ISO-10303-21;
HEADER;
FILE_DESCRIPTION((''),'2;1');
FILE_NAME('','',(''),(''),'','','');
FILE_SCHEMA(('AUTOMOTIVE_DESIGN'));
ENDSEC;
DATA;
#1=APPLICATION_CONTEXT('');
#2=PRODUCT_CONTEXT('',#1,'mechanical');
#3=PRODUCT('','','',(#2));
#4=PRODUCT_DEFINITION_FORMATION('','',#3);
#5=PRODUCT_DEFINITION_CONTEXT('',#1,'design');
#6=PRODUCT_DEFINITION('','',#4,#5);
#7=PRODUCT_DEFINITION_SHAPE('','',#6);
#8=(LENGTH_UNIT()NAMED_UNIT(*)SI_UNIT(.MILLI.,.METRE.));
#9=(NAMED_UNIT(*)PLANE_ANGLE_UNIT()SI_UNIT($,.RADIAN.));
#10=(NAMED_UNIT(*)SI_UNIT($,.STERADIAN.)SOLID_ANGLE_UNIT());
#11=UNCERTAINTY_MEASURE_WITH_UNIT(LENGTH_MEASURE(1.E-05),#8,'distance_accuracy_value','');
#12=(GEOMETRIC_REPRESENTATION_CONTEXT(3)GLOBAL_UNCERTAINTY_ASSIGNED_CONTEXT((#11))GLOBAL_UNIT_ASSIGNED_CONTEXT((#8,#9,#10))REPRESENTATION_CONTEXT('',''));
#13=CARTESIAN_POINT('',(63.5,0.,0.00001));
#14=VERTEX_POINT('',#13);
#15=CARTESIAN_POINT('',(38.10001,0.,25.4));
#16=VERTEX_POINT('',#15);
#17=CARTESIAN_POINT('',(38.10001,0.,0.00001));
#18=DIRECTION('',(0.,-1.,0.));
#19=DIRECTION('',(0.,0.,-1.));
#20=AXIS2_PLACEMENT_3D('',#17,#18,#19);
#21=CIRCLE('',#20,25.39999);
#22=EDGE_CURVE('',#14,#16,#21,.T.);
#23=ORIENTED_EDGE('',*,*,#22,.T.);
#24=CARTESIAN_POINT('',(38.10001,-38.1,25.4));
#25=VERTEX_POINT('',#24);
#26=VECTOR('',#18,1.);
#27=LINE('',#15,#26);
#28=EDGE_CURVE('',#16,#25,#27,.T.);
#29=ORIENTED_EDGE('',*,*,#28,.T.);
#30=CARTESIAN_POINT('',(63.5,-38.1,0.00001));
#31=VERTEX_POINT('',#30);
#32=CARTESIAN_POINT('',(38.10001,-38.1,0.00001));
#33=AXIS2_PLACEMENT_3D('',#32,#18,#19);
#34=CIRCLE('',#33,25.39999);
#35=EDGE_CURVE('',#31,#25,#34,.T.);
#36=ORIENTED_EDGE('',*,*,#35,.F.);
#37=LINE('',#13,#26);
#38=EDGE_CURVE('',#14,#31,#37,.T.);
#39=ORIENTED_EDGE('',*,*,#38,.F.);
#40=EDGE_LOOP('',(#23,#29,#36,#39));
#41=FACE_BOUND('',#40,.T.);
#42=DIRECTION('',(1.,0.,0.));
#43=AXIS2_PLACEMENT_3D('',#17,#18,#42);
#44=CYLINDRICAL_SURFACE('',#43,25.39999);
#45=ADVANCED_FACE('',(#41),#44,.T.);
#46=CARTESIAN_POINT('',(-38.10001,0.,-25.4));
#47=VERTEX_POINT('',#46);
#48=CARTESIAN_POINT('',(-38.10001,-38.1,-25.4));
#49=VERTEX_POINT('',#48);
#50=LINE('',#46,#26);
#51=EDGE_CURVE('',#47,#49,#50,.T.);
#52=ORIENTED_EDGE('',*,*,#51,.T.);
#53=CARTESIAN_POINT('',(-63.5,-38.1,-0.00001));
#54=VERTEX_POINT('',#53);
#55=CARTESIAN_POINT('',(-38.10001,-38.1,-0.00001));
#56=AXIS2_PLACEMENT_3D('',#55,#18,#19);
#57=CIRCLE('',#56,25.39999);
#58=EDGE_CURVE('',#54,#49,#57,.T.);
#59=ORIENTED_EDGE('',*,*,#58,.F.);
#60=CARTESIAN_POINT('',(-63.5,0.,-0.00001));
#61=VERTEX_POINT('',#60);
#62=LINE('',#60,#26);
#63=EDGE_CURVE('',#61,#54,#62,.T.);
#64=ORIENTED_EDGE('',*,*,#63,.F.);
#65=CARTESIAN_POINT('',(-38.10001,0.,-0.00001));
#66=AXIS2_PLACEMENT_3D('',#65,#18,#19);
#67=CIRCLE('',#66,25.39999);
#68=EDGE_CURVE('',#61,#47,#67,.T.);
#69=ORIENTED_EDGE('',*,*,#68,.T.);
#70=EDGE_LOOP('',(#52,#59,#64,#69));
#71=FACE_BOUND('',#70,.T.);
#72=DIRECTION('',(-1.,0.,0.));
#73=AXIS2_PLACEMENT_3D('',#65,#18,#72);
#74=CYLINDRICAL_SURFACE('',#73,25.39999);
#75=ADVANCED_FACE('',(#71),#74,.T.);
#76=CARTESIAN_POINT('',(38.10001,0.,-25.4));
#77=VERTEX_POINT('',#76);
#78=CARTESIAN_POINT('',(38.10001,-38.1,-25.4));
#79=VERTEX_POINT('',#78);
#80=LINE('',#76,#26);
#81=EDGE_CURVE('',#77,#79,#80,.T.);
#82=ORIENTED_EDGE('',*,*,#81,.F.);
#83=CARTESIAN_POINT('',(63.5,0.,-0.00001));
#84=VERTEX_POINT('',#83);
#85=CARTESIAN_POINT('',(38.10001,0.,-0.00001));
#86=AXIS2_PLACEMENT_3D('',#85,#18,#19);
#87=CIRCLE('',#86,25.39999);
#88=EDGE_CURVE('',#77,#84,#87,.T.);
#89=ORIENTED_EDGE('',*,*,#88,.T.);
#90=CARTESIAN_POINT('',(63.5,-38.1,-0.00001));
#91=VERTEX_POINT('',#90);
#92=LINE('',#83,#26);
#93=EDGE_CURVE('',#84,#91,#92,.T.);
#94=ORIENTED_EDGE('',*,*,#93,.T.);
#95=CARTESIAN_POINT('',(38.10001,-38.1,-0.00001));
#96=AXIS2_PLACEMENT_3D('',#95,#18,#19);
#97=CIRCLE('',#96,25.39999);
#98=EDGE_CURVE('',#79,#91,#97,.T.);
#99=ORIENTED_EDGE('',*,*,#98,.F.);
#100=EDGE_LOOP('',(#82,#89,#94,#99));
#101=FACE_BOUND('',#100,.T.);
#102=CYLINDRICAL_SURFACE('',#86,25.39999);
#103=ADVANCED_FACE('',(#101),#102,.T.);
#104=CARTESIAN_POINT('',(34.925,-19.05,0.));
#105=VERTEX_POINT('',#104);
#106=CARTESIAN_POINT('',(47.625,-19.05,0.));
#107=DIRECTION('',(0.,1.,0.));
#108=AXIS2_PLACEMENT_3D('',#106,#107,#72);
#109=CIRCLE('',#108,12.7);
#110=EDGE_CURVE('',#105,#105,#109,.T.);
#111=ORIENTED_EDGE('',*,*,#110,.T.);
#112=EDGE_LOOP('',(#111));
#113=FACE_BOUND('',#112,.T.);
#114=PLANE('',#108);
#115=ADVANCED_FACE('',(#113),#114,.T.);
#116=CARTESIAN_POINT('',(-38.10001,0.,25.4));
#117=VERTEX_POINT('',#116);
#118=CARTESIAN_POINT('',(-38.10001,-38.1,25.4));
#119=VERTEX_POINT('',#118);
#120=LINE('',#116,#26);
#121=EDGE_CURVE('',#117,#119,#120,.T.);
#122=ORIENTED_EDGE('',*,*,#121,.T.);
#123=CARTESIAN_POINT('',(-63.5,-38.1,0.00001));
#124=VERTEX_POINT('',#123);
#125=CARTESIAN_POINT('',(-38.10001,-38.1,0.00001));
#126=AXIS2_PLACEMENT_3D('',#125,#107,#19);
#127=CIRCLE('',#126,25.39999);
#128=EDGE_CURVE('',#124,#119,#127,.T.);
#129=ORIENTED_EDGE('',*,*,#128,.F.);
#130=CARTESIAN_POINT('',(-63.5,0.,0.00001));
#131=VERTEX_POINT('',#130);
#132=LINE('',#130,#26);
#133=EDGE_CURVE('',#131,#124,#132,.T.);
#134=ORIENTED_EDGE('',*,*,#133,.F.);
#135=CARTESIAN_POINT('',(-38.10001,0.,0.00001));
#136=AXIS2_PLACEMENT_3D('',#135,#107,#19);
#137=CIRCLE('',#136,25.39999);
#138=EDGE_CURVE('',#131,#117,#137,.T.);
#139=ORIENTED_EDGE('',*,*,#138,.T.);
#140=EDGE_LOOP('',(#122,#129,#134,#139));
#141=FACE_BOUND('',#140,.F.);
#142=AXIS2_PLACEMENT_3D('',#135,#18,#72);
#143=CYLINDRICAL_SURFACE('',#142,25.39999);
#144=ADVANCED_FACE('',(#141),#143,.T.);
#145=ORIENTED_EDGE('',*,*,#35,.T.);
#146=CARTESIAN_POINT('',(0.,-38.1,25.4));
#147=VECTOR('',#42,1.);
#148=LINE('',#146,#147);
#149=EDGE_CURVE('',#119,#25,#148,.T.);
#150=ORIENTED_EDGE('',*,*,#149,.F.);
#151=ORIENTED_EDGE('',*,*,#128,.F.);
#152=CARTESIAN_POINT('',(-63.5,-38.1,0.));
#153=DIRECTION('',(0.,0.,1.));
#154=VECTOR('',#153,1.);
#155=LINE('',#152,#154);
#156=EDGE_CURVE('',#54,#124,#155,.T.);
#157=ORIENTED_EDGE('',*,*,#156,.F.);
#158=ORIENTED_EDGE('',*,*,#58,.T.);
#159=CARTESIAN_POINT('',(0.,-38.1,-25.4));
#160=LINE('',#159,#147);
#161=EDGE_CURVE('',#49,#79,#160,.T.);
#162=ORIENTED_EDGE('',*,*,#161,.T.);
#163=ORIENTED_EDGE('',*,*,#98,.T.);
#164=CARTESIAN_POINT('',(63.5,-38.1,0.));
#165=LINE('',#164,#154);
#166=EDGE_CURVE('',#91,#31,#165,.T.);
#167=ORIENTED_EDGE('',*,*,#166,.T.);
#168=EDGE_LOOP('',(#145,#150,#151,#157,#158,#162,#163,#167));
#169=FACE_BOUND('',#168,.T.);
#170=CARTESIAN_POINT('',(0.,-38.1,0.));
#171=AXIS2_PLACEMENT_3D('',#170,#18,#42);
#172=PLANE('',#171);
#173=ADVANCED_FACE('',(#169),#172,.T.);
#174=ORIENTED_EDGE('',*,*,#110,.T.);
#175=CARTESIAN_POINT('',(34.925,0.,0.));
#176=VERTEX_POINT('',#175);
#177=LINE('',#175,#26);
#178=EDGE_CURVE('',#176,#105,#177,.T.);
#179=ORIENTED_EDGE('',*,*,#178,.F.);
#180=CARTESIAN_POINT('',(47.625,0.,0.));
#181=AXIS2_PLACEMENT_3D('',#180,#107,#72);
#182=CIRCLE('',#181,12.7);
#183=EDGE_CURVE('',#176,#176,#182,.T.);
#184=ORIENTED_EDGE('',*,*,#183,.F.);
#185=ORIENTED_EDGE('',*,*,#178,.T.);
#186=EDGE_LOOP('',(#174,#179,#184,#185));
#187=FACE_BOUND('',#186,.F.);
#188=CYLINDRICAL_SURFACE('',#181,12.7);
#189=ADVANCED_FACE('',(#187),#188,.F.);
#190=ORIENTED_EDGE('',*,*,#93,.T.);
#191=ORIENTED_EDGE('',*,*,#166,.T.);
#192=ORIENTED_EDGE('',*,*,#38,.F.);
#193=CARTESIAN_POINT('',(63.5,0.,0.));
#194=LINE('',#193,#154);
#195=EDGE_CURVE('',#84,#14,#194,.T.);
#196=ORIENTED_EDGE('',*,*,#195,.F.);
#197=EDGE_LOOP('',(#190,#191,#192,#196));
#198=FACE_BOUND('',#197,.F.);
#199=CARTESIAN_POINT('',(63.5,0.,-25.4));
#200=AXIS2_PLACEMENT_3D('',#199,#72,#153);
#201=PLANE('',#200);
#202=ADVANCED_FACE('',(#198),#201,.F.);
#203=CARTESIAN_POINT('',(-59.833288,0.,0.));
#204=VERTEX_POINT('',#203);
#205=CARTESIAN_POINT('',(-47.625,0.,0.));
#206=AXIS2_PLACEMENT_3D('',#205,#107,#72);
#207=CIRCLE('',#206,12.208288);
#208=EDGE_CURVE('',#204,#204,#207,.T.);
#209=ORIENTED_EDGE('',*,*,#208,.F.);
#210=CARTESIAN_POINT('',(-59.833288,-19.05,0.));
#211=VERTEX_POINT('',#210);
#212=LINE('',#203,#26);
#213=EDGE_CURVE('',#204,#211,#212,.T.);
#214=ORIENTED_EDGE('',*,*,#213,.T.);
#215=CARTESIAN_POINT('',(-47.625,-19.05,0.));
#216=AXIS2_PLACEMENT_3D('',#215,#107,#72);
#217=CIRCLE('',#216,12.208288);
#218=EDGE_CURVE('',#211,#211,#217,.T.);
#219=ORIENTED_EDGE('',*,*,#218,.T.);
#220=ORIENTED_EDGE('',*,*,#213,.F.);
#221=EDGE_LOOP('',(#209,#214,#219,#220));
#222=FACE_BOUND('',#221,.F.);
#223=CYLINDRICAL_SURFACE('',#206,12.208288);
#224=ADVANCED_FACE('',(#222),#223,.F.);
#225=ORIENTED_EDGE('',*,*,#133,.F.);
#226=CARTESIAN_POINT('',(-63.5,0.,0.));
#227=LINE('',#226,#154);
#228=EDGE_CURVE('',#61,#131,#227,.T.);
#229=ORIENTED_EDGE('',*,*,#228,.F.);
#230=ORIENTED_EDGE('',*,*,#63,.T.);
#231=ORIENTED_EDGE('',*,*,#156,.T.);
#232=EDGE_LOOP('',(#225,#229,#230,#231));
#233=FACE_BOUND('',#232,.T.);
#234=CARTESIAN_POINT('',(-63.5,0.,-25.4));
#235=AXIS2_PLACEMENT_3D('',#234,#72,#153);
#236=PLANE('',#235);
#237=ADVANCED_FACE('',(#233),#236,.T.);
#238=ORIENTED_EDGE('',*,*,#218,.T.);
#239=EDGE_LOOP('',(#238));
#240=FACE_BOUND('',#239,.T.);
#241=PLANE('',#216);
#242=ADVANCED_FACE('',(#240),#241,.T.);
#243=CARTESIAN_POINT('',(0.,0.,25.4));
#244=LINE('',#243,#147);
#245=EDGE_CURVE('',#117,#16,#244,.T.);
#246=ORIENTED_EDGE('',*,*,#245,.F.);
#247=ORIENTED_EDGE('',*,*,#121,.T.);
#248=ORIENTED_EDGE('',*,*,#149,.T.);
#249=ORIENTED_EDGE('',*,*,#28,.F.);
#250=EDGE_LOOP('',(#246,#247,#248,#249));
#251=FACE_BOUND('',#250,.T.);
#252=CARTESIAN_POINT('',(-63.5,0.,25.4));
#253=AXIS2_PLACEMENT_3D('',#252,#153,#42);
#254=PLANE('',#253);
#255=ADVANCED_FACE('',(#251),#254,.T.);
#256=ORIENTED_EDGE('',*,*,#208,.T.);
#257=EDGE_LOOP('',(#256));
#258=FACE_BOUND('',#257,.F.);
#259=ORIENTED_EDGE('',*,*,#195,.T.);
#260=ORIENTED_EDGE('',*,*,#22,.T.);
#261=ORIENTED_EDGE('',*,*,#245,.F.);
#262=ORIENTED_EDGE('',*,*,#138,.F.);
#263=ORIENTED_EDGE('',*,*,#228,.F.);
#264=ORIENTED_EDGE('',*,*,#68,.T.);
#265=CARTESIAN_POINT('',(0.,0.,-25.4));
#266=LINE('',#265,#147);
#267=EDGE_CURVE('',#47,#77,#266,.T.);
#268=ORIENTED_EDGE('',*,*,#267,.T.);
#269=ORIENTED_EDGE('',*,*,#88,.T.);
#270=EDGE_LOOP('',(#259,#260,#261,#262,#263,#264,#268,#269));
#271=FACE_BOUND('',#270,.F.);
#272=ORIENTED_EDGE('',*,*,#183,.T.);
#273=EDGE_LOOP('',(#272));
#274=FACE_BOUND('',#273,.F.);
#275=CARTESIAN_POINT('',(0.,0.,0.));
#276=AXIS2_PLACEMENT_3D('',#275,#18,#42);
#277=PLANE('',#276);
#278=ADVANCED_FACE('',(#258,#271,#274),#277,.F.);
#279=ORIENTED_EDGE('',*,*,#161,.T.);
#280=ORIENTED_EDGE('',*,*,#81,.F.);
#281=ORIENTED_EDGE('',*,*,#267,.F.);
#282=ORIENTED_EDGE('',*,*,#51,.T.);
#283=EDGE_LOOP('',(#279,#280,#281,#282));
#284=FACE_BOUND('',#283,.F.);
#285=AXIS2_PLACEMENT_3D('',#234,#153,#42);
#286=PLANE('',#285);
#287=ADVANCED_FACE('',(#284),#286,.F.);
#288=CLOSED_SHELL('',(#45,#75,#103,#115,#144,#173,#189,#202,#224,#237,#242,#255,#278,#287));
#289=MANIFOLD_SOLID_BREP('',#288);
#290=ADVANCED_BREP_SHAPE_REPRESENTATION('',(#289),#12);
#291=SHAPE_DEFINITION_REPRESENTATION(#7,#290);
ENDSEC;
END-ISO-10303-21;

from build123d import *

# Parameters (mm, degrees)
F0_W     = 127
F0_H     = 50.8
F1_DEPTH = 38.1
F2_R     = 25.39999
F3_R     = 12.2082879552
F3_R_2   = 12.7
F4_DEPTH = 19.05


# Not quite as in the source:
# - a fillet or chamfer is up to 0.001 mm smaller than in the source, because OpenCascade refuses the exact size


with BuildPart() as f1:
    # F0 (on Front) → F1 (new body)
    with BuildSketch(Plane.XZ):
        Rectangle(F0_W, F0_H)
    extrude(amount=F1_DEPTH)

    # F2 (radius 25.4 in the source; OpenCascade refuses exactly that, so slightly less here)
    f2_edges = [f1.edges().sort_by_distance(p)[0] for p in [
        (63.5, -19.05, 25.4),
        (63.5, -19.05, -25.4),
        (-63.5, -19.05, 25.4),
        (-63.5, -19.05, -25.4),
    ]]
    fillet(f2_edges, radius=F2_R)

    # F3 (on face) → F4 (cut)
    with BuildSketch(Plane(origin=(0, 0, 0), x_dir=(-1, 0, 0), z_dir=(0, 1, 0))):
        with Locations((47.625, 0)):
            Circle(F3_R)
        with Locations((-47.625, 0)):
            Circle(F3_R_2)
    extrude(amount=-F4_DEPTH, mode=Mode.SUBTRACT)


solid = f1.part
